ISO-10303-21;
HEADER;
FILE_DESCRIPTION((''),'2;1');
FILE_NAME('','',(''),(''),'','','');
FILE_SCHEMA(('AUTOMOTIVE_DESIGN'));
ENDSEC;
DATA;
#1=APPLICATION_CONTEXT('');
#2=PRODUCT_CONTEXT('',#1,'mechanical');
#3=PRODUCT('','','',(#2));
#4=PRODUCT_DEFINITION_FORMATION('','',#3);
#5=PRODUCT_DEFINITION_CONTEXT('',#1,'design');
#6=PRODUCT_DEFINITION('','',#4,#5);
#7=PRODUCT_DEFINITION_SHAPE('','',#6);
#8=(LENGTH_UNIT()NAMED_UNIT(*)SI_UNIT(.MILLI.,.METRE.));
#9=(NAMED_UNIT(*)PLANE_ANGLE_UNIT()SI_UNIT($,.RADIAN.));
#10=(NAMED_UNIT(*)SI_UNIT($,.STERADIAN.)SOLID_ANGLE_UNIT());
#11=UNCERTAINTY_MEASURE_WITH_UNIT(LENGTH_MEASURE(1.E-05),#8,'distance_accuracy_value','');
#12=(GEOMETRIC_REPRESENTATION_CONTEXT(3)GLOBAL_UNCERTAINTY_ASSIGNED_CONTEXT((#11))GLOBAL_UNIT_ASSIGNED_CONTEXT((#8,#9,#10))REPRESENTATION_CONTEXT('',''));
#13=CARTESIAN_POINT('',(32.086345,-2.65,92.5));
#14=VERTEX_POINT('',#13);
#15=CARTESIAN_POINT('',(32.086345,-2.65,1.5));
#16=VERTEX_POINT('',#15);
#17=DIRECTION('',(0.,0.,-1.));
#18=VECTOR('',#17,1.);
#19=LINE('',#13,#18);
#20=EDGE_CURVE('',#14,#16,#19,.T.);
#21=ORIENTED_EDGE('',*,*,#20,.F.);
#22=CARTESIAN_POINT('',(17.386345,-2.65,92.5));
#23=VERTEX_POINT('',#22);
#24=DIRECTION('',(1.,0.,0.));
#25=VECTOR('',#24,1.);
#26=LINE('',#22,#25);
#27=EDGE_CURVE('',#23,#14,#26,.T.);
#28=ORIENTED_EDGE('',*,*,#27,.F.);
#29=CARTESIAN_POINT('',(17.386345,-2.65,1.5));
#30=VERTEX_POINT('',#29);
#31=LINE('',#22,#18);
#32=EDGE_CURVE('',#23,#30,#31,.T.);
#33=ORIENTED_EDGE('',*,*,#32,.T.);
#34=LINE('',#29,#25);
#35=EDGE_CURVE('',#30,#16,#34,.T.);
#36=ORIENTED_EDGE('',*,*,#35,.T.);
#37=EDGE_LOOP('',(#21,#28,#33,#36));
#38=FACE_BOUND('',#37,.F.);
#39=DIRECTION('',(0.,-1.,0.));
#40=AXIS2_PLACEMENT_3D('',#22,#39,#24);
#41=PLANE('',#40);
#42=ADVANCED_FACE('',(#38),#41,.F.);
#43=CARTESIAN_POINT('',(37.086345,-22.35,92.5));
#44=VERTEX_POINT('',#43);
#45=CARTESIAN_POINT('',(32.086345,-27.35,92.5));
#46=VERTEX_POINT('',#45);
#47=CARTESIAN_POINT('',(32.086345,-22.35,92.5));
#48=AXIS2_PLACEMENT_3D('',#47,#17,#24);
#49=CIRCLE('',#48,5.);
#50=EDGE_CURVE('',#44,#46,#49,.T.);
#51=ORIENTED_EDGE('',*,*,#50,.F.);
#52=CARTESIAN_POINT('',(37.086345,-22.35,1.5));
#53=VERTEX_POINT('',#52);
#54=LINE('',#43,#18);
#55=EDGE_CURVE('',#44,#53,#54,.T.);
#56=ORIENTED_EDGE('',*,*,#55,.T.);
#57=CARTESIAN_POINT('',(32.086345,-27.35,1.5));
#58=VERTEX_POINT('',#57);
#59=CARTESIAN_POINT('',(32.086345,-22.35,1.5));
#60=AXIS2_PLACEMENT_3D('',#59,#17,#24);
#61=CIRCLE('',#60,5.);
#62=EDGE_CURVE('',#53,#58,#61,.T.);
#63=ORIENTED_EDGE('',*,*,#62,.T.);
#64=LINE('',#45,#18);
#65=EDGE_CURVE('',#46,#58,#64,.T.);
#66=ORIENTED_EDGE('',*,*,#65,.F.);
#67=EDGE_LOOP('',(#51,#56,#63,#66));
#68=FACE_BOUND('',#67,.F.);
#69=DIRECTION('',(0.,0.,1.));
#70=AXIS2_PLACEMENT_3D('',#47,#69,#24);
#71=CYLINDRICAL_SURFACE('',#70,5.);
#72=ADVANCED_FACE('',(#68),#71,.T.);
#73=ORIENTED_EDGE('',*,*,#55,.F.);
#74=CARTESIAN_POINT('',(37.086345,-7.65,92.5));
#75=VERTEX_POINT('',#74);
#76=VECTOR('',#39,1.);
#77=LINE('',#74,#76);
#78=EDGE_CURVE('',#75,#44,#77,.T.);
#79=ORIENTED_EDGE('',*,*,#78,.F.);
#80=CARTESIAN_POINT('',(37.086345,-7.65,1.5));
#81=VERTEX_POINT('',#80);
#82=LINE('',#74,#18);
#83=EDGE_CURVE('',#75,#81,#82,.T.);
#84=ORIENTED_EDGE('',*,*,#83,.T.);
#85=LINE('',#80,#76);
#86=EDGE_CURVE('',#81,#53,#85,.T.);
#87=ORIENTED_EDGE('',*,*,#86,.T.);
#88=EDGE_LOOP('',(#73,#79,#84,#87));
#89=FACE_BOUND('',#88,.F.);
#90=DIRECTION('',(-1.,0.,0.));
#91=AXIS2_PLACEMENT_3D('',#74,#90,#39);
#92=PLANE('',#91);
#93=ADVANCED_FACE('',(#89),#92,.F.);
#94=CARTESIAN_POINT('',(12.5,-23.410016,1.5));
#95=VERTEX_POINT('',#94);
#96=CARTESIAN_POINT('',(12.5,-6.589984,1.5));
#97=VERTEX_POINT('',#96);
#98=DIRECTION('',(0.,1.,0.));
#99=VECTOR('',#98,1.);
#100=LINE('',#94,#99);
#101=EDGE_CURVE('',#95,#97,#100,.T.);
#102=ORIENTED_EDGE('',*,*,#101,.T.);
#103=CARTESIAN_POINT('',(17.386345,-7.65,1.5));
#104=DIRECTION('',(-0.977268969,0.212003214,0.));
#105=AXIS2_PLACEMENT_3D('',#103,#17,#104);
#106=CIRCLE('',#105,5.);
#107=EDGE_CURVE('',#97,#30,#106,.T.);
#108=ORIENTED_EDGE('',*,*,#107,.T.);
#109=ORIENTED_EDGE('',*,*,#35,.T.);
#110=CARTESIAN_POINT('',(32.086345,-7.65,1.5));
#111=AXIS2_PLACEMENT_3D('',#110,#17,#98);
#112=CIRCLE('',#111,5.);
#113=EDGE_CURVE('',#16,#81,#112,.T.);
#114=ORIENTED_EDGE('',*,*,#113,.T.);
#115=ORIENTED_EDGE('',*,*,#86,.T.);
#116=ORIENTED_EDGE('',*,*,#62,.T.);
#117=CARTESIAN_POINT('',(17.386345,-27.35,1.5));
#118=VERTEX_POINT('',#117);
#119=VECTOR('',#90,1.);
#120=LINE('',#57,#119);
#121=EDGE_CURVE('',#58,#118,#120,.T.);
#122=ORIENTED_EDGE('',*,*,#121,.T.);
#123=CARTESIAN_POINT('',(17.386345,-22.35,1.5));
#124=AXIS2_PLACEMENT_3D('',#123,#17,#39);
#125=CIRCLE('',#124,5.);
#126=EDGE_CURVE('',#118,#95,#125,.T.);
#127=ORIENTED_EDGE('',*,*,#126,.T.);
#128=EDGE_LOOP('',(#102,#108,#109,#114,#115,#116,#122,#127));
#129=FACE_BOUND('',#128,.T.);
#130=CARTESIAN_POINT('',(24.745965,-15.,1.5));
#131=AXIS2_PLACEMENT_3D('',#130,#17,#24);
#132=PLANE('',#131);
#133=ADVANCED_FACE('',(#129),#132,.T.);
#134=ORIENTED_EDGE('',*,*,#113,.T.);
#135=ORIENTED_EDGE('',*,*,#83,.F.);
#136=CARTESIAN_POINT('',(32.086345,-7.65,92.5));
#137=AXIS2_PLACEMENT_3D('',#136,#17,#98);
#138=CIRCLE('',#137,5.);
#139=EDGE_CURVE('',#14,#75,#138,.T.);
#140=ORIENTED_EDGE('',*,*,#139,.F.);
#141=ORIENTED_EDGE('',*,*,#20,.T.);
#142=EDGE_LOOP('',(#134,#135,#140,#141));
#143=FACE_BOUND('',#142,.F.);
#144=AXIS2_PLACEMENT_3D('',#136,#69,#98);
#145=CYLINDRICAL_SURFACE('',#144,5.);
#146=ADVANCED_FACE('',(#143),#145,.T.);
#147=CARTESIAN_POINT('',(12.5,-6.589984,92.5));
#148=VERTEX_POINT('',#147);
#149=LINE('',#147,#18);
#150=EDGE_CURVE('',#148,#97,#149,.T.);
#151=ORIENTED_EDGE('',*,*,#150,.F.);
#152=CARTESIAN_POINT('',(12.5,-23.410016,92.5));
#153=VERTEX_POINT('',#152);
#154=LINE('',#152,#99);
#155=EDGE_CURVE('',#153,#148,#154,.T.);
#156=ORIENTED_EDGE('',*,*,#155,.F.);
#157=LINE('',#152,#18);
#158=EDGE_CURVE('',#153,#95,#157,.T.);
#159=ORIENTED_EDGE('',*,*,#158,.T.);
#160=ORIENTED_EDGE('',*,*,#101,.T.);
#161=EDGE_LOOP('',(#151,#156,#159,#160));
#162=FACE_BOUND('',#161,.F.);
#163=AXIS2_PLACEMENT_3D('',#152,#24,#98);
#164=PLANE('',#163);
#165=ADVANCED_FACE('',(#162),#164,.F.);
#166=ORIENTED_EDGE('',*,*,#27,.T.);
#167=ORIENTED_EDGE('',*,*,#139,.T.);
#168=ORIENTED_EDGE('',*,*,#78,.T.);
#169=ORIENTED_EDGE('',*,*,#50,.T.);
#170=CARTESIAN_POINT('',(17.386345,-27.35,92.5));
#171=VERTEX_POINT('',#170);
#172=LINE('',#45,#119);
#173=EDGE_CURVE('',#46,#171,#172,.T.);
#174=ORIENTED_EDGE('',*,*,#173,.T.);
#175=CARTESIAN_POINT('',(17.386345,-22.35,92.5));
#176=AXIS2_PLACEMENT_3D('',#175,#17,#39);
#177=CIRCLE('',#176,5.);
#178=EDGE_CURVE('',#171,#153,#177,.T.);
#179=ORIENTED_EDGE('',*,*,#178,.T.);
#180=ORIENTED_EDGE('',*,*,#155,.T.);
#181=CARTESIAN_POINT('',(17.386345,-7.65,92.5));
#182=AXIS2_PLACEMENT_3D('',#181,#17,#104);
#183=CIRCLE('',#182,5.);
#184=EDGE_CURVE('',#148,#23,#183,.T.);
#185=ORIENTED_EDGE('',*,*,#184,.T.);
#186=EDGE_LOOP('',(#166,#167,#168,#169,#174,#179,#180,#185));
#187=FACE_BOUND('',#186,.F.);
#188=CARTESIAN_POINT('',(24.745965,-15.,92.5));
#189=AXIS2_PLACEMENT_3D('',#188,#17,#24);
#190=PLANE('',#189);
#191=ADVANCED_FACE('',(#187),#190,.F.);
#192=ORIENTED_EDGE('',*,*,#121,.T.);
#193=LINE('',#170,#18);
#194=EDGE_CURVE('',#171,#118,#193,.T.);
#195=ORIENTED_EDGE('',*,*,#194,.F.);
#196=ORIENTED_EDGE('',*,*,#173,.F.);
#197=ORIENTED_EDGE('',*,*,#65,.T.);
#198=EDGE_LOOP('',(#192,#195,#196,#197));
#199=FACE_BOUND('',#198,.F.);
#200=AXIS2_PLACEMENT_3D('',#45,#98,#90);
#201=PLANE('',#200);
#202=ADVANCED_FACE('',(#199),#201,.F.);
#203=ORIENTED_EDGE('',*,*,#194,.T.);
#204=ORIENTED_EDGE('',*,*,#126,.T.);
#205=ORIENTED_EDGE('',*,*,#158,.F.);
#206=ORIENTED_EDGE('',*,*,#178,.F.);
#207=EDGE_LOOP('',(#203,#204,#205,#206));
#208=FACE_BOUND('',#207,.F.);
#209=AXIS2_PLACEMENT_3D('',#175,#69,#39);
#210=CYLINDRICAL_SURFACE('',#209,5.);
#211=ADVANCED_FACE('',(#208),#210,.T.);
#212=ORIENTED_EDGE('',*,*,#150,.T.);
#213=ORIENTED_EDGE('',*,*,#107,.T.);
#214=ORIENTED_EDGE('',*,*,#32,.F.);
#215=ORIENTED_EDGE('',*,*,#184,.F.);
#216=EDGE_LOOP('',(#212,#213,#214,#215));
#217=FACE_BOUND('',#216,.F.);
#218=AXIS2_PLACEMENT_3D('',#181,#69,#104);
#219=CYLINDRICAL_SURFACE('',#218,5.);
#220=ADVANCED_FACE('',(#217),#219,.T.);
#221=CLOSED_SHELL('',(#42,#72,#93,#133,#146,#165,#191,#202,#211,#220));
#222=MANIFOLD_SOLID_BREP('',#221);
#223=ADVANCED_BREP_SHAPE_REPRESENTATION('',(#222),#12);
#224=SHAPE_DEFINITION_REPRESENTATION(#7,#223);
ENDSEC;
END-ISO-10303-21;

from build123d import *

# Parameters (mm, degrees)
F0_W         = 80
F0_H         = 60
F1_DEPTH     = 130
F2_T         = -1.5
F3_W         = 1.5
F3_H         = 27
F4_DEPTH     = 91
F5_R         = 1
F6_W         = 17
F6_H         = 16
F6_W_2       = 1.5
F6_H_2       = 27
F7_DEPTH     = 2
F8_T1_DEPTH  = 92
F8_T3_DEPTH  = 29.9726896882
F8_S7_W      = 1
F8_S7_H      = 1
F8_T8_DEPTH  = 1
F8_T15_DEPTH = 29.9726896882
F8_T19_DEPTH = 94.5
F9_T1_DEPTH  = 127.5
F9_T3_DEPTH  = 58.5
F9_S7_W      = 1
F9_S7_H      = 1
F9_T8_DEPTH  = 1
F9_S13_W     = 1
F9_S13_H     = 1
F9_T14_DEPTH = 1
F9_T18_ANGLE = 90
F11_DEPTH    = 60
F12_DEPTH    = 60
F13_DEPTH    = 50
F14_R        = 2
F15_W        = 17
F15_H        = 16
F16_DEPTH    = 91


# Not quite as in the source:
# - a fillet or chamfer that OpenCascade refuses, or shapes differently, is made with other operations: its cross-section is extruded or revolved along the edge and cut away or added


with BuildPart() as f1:
    # F0 (on Top) → F1 (new body)
    with BuildSketch(Plane.XY):
        Rectangle(F0_W, F0_H)
    extrude(amount=F1_DEPTH)

    # F2
    f2_openings = [f1.faces().sort_by_distance(p)[0] for p in [
        (0, 0, 130),
    ]]
    offset(amount=F2_T, openings=f2_openings)

    # F3 (on face) → F4 (join)
    with BuildSketch(Plane.XY.offset(1.5)):
        with Locations((11.75, -15)):
            Rectangle(F3_W, F3_H)
    extrude(amount=F4_DEPTH)

    # F5
    f5_edges = [f1.edges().sort_by_distance(p)[0] for p in [
        (0, 28.5, 1.5),
        (-38.5, 0, 1.5),
        (-13.75, -28.5, 1.5),
        (11, -15, 1.5),
    ]]
    fillet(f5_edges, radius=F5_R)

    # F6 (on face) → F7 (join)
    with BuildSketch(Plane.XY.offset(92.5)):
        Polygon((38.4726896882, -1.5), (12.5, -1.5), (12.5, -28.5), (11, -28.5), (11, -28.532365337), (38.4726896882, -28.532365337), align=None)
        with Locations((24.7363448441, -15)):
            Rectangle(F6_W, F6_H, mode=Mode.SUBTRACT)
        with Locations((11.75, -15)):
            Rectangle(F6_W_2, F6_H_2)
    extrude(amount=F7_DEPTH)

    # F8: fillet of radius 1 on 2 edges, made by hand

    # F8_s2 → F8_t1 (join)
    with BuildSketch(Plane.XY.offset(2.5)):
        with BuildLine():
            ThreePointArc((10, -28.5), (10.7071067812, -28.2071067812), (11, -27.5))
            Line((11, -27.5), (11, -28.5))
            Line((11, -28.5), (10, -28.5))
        make_face()
    extrude(amount=F8_T1_DEPTH)

    # F8_s4 → F8_t3 (join)
    with BuildSketch(Plane.YZ.offset(11)):
        with BuildLine():
            ThreePointArc((-28.5, 95.5), (-28.2071067812, 94.7928932188), (-27.5, 94.5))
            Line((-27.5, 94.5), (-28.5, 94.5))
            Line((-28.5, 94.5), (-28.5, 95.5))
        make_face()
    extrude(amount=F8_T3_DEPTH)


with BuildPart() as f8_tool6:
    # F8_s7 → F8_t8 (new body)
    with BuildSketch(Plane.XZ.offset(27.5)):
        with Locations((10.5, 2)):
            Rectangle(F8_S7_W, F8_S7_H)
    extrude(amount=F8_T8_DEPTH)

    # F8_s9 → F8_t10 (revolve, cut)
    with BuildSketch(Plane(origin=(10, -27.5, 2.5), x_dir=(-0.7071067812, 0, 0.7071067812), z_dir=(0.7071067812, 0, 0.7071067812))):
        with BuildLine():
            ThreePointArc((0, -1), (1, 0), (0, 1))
            Line((0, 1), (0, -1))
        make_face()
    revolve(axis=Axis((10, -27.5, 2.5), (0, -1, 0)), mode=Mode.SUBTRACT)


with BuildPart() as f1_1:
    add(f1.part)

    # F8_t5: union F8_tool6
    add(f8_tool6.part)


with BuildPart() as f8_tool13:
    # F8_s14 → F8_t15 (new body)
    with BuildSketch(Plane.YZ.offset(8.5)):
        with BuildLine():
            ThreePointArc((-28.5, 95.5), (-28.2071067812, 94.7928932188), (-27.5, 94.5))
            Line((-27.5, 94.5), (-28.5, 94.5))
            Line((-28.5, 94.5), (-28.5, 95.5))
        make_face()
    extrude(amount=F8_T15_DEPTH)

    split(bisect_by=Plane.YZ.offset(11), keep=Keep.BOTTOM)


with BuildPart() as f8_tool17:
    # F8_s18 → F8_t19 (new body)
    with BuildSketch(Plane.XY.offset(97)):
        with BuildLine():
            ThreePointArc((10, -28.5), (10.7071067812, -28.2071067812), (11, -27.5))
            Line((11, -27.5), (11, -28.5))
            Line((11, -28.5), (10, -28.5))
        make_face()
    extrude(amount=-F8_T19_DEPTH)

    split(bisect_by=Plane.XY.offset(94.5), keep=Keep.TOP)


with BuildPart() as f8_tool13_1:
    add(f8_tool13.part)

    # F8_t21: intersect F8_tool17
    add(f8_tool17.part, mode=Mode.INTERSECT)


with BuildPart() as f1_2:
    add(f1_1.part)

    # F8_t11: union F8_tool13
    add(f8_tool13_1.part)

    # F9: fillet of radius 1 on 3 edges, made by hand

    # F9_s2 → F9_t1 (join)
    with BuildSketch(Plane.XY.offset(2.5)):
        with BuildLine():
            ThreePointArc((-37.5, -28.5), (-38.2071067812, -28.2071067812), (-38.5, -27.5))
            Line((-38.5, -27.5), (-38.5, -28.5))
            Line((-38.5, -28.5), (-37.5, -28.5))
        make_face()
        with BuildLine():
            ThreePointArc((-37.5, 28.5), (-38.2071067812, 28.2071067812), (-38.5, 27.5))
            Line((-38.5, 27.5), (-38.5, 28.5))
            Line((-38.5, 28.5), (-37.5, 28.5))
        make_face()
        with BuildLine():
            ThreePointArc((37.5, 28.5), (38.2071067812, 28.2071067812), (38.5, 27.5))
            Line((38.5, 27.5), (38.5, 28.5))
            Line((38.5, 28.5), (37.5, 28.5))
        make_face()
    extrude(amount=F9_T1_DEPTH)

    # F9_s4 → F9_t3 (join)
    with BuildSketch(Plane.XZ.offset(-27.5)):
        with BuildLine():
            ThreePointArc((38.5, 2.5), (38.2071067812, 1.7928932188), (37.5, 1.5))
            Line((37.5, 1.5), (38.5, 1.5))
            Line((38.5, 1.5), (38.5, 2.5))
        make_face()
    extrude(amount=F9_T3_DEPTH)


with BuildPart() as f9_tool6:
    # F9_s7 → F9_t8 (new body)
    with BuildSketch(Plane.XZ.offset(-27.5)):
        with Locations((-38, 2)):
            Rectangle(F9_S7_W, F9_S7_H)
    extrude(amount=-F9_T8_DEPTH)

    # F9_s9 → F9_t10 (revolve, cut)
    with BuildSketch(Plane(origin=(-37.5, 27.5, 2.5), x_dir=(0.7071067812, 0, 0.7071067812), z_dir=(-0.7071067812, 0, 0.7071067812))):
        with BuildLine():
            ThreePointArc((0, -1), (1, 0), (0, 1))
            Line((0, 1), (0, -1))
        make_face()
    revolve(axis=Axis((-37.5, 27.5, 2.5), (0, 1, 0)), mode=Mode.SUBTRACT)


with BuildPart() as f1_3:
    add(f1_2.part)

    # F9_t5: union F9_tool6
    add(f9_tool6.part)


with BuildPart() as f9_tool12:
    # F9_s13 → F9_t14 (new body)
    with BuildSketch(Plane.XZ.offset(27.5)):
        with Locations((-38, 2)):
            Rectangle(F9_S13_W, F9_S13_H)
    extrude(amount=F9_T14_DEPTH)

    # F9_s15 → F9_t16 (revolve, cut)
    with BuildSketch(Plane(origin=(-37.5, -27.5, 2.5), x_dir=(0.7071067812, 0, 0.7071067812), z_dir=(0.7071067812, 0, -0.7071067812))):
        with BuildLine():
            ThreePointArc((0, -1), (1, 0), (0, 1))
            Line((0, 1), (0, -1))
        make_face()
    revolve(axis=Axis((-37.5, -27.5, 2.5), (0, -1, 0)), mode=Mode.SUBTRACT)


with BuildPart() as f1_4:
    add(f1_3.part)

    # F9_t11: union F9_tool12
    add(f9_tool12.part)

    # F9_s17 → F9_t18 (revolve)
    with BuildSketch(Plane.XY.offset(2.5)):
        with BuildLine():
            ThreePointArc((38.5, 27.5), (38.2071067812, 28.2071067812), (37.5, 28.5))
            Line((37.5, 28.5), (38.5, 28.5))
            Line((38.5, 28.5), (38.5, 27.5))
        make_face()
    revolve(axis=Axis((38.5, 27.5, 2.5), (-1, 0, 0)), revolution_arc=F9_T18_ANGLE)

    # F10 (on face) → F11 (join)
    with BuildSketch(Plane(origin=(0, 30, 0), x_dir=(-1, 0, 0), z_dir=(0, 1, 0))):
        Polygon((-42.6013286531, 4), (-41.4004783891, 2.4006374993), (-42.6, 1.5), (-44.4770764343, 4), (-45, 4), (-45, 0), (-40, 0), (-40, 4), align=None)
    extrude(amount=-F11_DEPTH)

    # F10 (on face) → F12 (join)
    with BuildSketch(Plane(origin=(0, 30, 0), x_dir=(-1, 0, 0), z_dir=(0, 1, 0))):
        Polygon((-65.4174783693, 34.3878804557), (-64.0949453732, 32.6264537871), (-40, 32.6264537871), (-40, 35.6264537871), (-68, 35.6264537871), (-68, 32.6264537871), (-65.9706931543, 32.6264537871), (-66.6169999802, 33.4872429564), align=None)
    extrude(amount=-F12_DEPTH)

    # F14
    f14_edges = [f1_4.edges().sort_by_distance(p)[0] for p in [
        (40, 0, 35.626454),
        (40, 0, 4),
        (40, 0, 32.626454),
    ]]
    fillet(f14_edges, radius=F14_R)


with BuildPart() as f13:
    # F10 (on face) → F13 (new body)
    with BuildSketch(Plane(origin=(0, 30, 0), x_dir=(-1, 0, 0), z_dir=(0, 1, 0))):
        Polygon((-42.6, 1.5), (-41.4004783891, 2.4006374993), (-42.6013286531, 4), (-44.4770764343, 4), align=None)
        Polygon((-44.4770764343, 4), (-42.6013286531, 4), (-64.0949453732, 32.6264537871), (-65.9706931543, 32.6264537871), align=None)
        Polygon((-65.9706931543, 32.6264537871), (-64.0949453732, 32.6264537871), (-65.4174783693, 34.3878804557), (-66.6169999802, 33.4872429564), align=None)
    extrude(amount=-F13_DEPTH)


with BuildPart() as f16:
    # F15 (on face) → F16 (new body)
    with BuildSketch(Plane(origin=(0, 0, 92.5), x_dir=(1, 0, 0), z_dir=(0, 0, -1))):
        with BuildLine():
            ThreePointArc((12.5, 6.589983932), (14.2478802784, 3.7576947486), (17.3863448441, 2.65))
            Line((17.3863448441, 2.65), (32.0863448441, 2.65))
            ThreePointArc((32.0863448441, 2.65), (35.62187875, 4.1144660941), (37.0863448441, 7.65))
            Line((37.0863448441, 7.65), (37.0863448441, 22.35))
            ThreePointArc((37.0863448441, 22.35), (35.62187875, 25.8855339059), (32.0863448441, 27.35))
            Line((32.0863448441, 27.35), (17.3863448441, 27.35))
            ThreePointArc((17.3863448441, 27.35), (14.2478802784, 26.2423052514), (12.5, 23.410016068))
            Line((12.5, 23.410016068), (12.5, 6.589983932))
        make_face()
        with Locations((24.7363448441, 15)):
            Rectangle(F15_W, F15_H, mode=Mode.SUBTRACT)
        with Locations((24.7363448441, 15)):
            Rectangle(F15_W, F15_H)
    extrude(amount=F16_DEPTH)


solid = f16.part
